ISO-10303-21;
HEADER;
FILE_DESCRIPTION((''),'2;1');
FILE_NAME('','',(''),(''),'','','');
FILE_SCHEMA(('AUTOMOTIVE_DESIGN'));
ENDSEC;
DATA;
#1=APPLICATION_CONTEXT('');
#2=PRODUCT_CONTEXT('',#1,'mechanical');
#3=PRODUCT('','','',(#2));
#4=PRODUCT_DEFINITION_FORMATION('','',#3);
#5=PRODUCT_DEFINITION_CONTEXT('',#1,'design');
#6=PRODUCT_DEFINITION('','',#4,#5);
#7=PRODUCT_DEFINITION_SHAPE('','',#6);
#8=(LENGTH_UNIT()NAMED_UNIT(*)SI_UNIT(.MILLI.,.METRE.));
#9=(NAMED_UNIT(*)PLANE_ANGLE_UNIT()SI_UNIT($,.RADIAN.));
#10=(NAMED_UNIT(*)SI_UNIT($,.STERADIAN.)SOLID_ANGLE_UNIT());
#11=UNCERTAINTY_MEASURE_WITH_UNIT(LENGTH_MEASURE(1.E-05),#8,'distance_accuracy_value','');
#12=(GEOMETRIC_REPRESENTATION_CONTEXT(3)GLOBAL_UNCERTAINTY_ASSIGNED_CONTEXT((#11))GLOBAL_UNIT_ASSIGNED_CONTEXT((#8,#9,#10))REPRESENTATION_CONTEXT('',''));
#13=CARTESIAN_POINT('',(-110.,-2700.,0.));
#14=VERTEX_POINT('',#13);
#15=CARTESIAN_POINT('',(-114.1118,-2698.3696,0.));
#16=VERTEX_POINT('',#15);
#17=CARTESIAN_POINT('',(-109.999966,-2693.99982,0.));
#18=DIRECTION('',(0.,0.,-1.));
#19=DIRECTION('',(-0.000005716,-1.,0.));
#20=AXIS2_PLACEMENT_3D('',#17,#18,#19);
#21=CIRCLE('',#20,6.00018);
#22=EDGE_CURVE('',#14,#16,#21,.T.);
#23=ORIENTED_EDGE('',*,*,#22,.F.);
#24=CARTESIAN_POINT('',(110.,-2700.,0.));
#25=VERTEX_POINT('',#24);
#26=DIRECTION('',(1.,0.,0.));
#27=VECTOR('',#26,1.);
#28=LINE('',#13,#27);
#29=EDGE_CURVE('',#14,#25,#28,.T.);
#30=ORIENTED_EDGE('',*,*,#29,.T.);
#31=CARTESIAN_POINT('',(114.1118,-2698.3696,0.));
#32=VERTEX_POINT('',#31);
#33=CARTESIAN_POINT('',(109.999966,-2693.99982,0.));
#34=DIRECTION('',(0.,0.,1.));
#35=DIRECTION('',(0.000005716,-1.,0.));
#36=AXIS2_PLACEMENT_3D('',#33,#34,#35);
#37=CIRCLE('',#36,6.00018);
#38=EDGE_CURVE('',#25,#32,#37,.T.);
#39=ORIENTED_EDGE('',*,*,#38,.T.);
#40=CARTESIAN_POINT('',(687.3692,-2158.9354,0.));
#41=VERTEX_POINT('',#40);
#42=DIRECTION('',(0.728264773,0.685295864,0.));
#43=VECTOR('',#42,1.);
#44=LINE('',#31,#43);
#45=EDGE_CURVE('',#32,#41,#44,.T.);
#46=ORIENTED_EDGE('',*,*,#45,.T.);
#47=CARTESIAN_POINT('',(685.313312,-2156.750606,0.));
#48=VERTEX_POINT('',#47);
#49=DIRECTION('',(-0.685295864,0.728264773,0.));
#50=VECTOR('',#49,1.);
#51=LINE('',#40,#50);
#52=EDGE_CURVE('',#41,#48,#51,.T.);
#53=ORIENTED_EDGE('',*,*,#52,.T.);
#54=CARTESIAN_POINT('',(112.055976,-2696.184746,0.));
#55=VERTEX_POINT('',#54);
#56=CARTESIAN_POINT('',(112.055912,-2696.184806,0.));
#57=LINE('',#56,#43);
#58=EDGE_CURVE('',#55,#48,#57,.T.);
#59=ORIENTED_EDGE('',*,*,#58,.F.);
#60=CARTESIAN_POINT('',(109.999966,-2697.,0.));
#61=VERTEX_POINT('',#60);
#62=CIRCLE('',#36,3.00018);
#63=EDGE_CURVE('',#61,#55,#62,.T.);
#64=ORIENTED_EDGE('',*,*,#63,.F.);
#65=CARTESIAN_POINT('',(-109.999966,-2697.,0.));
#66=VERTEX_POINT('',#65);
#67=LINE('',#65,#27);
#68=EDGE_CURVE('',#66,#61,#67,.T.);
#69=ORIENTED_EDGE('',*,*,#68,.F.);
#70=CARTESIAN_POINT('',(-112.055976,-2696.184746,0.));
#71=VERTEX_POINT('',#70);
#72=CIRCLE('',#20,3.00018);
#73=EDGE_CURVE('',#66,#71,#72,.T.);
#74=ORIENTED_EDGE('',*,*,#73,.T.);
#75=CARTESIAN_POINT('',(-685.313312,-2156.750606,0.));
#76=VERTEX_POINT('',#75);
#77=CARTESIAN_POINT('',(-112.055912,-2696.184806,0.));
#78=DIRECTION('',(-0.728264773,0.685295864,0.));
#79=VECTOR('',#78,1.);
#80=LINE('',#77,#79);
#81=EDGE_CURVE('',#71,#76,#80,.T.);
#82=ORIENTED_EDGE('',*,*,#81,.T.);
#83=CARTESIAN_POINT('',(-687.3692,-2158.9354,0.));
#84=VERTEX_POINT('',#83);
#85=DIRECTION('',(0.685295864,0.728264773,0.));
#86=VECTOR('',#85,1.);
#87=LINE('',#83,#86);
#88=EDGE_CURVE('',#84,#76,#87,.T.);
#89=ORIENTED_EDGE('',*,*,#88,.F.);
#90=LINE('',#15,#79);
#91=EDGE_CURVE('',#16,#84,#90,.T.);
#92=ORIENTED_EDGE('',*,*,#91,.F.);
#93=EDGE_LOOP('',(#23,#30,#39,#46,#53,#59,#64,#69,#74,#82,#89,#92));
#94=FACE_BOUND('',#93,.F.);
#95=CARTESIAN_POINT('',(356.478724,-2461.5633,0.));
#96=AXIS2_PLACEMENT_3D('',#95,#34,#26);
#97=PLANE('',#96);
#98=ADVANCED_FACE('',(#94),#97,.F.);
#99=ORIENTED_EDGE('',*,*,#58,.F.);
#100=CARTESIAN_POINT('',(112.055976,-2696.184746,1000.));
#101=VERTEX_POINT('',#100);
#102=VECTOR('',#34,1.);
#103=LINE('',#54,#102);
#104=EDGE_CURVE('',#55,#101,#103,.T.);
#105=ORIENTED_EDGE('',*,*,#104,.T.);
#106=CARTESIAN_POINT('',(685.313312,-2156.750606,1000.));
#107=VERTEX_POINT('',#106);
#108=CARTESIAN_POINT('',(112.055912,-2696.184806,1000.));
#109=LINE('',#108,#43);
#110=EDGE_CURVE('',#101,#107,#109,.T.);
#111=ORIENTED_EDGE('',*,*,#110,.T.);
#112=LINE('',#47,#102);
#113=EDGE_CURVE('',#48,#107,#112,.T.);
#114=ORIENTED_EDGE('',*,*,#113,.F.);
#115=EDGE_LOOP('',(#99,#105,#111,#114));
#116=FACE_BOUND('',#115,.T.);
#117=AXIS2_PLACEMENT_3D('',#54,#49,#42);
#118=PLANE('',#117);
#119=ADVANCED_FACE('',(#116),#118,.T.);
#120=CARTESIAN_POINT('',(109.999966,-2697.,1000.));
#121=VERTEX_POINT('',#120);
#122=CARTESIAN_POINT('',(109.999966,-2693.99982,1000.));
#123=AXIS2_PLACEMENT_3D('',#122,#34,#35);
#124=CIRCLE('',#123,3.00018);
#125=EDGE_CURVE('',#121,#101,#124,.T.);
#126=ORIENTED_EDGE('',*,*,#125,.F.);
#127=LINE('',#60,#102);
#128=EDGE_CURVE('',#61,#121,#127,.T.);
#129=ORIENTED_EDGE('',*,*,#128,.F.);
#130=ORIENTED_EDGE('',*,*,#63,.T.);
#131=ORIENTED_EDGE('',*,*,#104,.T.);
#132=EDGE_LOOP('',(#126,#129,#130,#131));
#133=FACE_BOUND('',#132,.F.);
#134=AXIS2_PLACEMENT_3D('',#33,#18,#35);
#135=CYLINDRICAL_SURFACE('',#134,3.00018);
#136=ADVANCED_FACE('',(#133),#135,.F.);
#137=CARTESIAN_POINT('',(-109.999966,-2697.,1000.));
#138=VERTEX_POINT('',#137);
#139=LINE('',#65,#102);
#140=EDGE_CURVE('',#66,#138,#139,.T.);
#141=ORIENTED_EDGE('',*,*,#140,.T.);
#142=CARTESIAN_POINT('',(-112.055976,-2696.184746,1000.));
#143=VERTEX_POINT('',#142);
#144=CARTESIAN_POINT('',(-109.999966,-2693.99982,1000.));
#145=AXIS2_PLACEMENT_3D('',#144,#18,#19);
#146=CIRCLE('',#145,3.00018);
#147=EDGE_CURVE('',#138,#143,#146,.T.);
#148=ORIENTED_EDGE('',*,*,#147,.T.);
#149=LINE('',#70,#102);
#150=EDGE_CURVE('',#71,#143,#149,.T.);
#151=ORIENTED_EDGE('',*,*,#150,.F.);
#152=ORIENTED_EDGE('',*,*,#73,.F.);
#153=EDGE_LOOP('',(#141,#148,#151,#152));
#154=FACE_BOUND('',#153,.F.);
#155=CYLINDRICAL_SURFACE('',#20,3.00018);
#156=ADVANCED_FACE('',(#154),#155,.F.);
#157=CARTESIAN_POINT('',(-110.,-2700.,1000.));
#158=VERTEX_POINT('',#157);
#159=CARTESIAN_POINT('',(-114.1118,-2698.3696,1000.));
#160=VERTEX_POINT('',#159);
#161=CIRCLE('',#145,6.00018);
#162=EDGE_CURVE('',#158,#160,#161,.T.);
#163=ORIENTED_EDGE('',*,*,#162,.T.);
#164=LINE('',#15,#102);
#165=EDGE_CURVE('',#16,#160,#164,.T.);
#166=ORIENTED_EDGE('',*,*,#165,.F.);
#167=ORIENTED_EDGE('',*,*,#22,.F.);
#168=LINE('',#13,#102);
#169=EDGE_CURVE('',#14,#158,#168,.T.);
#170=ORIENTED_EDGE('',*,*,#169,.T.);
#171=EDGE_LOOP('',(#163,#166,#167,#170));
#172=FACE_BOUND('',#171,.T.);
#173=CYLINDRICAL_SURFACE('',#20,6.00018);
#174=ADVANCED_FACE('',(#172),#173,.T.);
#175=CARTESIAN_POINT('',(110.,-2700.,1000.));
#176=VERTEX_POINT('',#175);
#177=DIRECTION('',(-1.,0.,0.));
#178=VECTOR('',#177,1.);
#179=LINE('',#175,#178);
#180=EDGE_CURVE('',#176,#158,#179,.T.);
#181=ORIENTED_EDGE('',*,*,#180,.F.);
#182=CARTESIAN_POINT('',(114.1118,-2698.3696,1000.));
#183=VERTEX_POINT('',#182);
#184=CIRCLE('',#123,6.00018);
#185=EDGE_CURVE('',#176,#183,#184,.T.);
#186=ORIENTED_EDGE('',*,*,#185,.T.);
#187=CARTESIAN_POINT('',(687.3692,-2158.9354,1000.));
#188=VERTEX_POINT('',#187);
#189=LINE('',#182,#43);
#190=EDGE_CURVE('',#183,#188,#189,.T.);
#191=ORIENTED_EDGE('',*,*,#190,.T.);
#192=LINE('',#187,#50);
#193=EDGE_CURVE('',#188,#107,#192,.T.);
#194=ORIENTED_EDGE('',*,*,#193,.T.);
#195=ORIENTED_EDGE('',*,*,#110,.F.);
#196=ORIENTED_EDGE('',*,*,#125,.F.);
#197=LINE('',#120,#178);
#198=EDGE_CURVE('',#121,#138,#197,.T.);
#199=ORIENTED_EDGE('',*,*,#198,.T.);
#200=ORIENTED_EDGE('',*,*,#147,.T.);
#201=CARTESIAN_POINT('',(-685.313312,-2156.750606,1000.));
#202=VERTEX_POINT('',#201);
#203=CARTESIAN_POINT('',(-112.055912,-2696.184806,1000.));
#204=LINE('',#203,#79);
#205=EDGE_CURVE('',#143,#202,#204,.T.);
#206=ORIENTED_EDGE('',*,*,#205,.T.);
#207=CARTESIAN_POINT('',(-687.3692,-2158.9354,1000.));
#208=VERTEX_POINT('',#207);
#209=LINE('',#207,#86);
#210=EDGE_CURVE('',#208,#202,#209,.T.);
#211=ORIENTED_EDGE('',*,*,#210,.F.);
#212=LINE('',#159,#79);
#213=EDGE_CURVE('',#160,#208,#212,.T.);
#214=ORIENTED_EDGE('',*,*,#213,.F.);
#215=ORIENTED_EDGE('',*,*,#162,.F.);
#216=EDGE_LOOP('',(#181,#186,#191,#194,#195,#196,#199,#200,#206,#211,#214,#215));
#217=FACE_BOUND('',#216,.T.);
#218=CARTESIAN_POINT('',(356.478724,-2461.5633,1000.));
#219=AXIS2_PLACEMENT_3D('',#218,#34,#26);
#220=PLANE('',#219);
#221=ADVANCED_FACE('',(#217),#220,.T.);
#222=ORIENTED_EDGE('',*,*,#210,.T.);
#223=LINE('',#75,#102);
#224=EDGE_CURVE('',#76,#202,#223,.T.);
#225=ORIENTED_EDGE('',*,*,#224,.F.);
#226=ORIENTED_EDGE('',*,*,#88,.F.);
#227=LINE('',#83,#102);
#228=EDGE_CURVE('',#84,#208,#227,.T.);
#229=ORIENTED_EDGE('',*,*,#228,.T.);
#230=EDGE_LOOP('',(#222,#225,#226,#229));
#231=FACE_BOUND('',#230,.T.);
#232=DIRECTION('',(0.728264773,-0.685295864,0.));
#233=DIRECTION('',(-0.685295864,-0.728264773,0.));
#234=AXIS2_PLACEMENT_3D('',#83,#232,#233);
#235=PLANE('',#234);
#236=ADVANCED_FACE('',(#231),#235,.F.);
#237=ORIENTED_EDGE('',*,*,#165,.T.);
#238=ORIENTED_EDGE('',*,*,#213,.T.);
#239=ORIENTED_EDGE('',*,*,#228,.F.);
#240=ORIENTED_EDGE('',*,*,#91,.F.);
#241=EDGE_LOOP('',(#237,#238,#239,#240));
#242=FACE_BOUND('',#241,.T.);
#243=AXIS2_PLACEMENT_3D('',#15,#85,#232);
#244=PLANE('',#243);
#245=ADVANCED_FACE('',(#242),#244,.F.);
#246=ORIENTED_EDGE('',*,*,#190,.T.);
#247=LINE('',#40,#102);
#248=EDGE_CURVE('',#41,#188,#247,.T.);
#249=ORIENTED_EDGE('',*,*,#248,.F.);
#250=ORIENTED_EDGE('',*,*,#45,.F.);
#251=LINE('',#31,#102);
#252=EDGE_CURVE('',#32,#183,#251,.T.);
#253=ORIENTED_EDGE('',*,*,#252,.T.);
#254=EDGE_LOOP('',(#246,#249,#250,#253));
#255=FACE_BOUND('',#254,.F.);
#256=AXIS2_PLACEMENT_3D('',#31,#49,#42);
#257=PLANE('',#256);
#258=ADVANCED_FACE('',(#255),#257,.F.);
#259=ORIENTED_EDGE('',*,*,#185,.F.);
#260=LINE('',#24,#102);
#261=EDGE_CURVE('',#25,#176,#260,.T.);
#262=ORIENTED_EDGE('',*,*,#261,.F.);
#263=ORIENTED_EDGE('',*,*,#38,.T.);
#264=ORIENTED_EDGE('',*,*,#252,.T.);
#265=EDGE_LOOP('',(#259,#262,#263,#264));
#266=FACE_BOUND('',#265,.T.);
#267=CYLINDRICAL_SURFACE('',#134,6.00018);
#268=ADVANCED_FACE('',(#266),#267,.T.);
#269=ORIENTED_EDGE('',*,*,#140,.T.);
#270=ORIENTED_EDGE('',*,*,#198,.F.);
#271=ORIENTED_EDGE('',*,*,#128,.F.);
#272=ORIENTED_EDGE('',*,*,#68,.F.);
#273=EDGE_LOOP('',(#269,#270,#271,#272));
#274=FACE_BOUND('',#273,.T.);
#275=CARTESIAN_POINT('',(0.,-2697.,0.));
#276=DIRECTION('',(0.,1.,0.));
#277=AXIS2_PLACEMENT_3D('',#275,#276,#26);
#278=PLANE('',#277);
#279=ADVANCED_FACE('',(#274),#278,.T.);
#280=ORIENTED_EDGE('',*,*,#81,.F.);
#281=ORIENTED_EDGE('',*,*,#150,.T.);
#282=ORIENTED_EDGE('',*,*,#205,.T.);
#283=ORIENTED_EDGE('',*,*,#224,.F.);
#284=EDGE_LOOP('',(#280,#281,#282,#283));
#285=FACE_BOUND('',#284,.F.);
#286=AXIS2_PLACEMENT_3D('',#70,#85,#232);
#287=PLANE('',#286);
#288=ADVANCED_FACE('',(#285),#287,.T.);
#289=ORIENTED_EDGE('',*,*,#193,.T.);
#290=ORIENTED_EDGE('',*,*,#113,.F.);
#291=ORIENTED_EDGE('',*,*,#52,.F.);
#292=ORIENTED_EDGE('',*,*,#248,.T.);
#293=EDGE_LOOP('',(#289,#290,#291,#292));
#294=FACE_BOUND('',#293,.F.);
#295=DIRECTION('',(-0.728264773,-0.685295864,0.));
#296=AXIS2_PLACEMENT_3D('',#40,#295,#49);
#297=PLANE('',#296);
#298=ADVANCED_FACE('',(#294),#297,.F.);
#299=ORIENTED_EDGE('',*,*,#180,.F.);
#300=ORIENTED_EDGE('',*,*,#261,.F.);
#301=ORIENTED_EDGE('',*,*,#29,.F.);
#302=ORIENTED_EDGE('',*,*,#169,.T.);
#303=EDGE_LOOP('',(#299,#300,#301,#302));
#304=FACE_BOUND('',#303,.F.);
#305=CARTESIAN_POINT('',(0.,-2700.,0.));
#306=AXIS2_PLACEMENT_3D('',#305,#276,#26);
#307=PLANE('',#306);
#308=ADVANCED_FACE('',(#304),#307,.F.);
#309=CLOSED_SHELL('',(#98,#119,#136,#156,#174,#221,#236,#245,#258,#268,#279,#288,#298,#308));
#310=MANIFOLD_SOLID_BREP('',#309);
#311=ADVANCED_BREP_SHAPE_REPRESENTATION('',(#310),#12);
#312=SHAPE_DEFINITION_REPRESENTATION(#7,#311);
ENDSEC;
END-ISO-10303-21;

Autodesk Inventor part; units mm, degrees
ref_plane "YZ Plane" through (0, 0, 0) normal (1, 0, 0) x (0, 1, 0)
ref_plane "XZ Plane" through (0, 0, 0) normal (0, 1, 0) x (-1, 0, 0)
ref_plane "XY Plane" through (0, 0, 0) normal (0, 0, 1) x (1, 0, 0)
sketch "Sketch1" plane through (0, 0, 0) normal (0, 0, 1) x (1, 0, 0)
  line L0 (-750, 0) -> (750, 0) construction
  line L1 (750, 0) -> (750, -2700) construction
  line L2 (750, -2700) -> (-750, -2700) construction
  line L3 (-750, -2700) -> (-750, 0) construction
  line L4 (800, 50) -> (-800, 50) construction
  line L5 (-800, 50) -> (-800, -2750) construction
  line L6 (-800, -2750) -> (800, -2750) construction
  line L7 (800, -2750) -> (800, 50) construction
  line L8 (-850, 100) -> (850, 100) construction
  line L9 (850, 100) -> (850, -2800) construction
  line L10 (850, -2800) -> (-850, -2800) construction
  line L11 (-850, -2800) -> (-850, 100) construction
  arc A0 (750, 0) -> (745.2706, 0.6314) centre (0, -5600) ccw construction
  line L12 (-750, -2100) -> (750, -2100) construction
  line L13 (114.1118, -2698.3696) -> (687.3692, -2158.9354)
  arc A1 (750, -2100) -> (768.2917, -213.4901) centre (-10250, -1050) ccw construction
  line L14 (750, 0) -> (749.6018, -2.9735) construction
  arc A2 (750, -3.0268) -> (0, 47) centre (-0.2, -5603) ccw construction
  line L15 (750, 0) -> (747.0136, -0.2851) construction
  arc A3 (767.1641, -238.6409) -> (747.4657, -5.0326) centre (-10252.9895, -1050.2527) ccw construction
  arc A4 (750.4522, -4.7486) -> (745.2706, 0.6314) centre (744.4791, -5.3162) ccw construction
  arc A5 (747.4657, -5.0326) -> (744.8748, -2.3426) centre (744.4792, -5.3164) ccw construction
  line L16 (750, -2100) -> (752.9864, -2100.2851) construction
  arc A6 (752.9864, -2100.2851) -> (771.2831, -213.263) centre (-10246.9891, -1050.0292) ccw construction
  line L17 (750, -2100) -> (752.0559, -2102.1848) construction
  line L18 (752.0559, -2102.1848) -> (752.0559, -2102.1848) construction
  arc A7 (749.1768, -2100.7746) -> (750.1074, -2098.8746) centre (747.1209, -2098.5898) ccw construction
  line L19 (0, -2697) -> (110, -2697) construction
  line L20 (112.0559, -2696.1848) -> (685.3133, -2156.7506) construction
  arc A8 (110, -2700) -> (114.1118, -2698.3696) centre (110, -2694) ccw
  arc A9 (110, -2697) -> (112.0559, -2696.1848) centre (110, -2694) ccw construction
  line L21 (685.3133, -2156.7506) -> (687.3692, -2158.9354) construction
  line L22 (752.0559, -2102.1848) -> (671.2185, -2178.2526) construction
  line L23 (671.2185, -2178.2526) -> (669.1626, -2176.0678) construction
  arc A10 (747.4657, -5.0326) -> (747.0136, -0.2851) centre (-10252.9895, -1050.2527) ccw construction
  arc A11 (745.2706, 0.6314) -> (0, 50) centre (0, -5600) ccw construction
  arc A12 (750.4522, -4.7486) -> (750, 0) centre (-10250, -1050) ccw construction
  line L24 (770.156, -238.4205) -> (767.1641, -238.6409) construction
  line L25 (768.2917, -213.4901) -> (771.2831, -213.263) construction
  arc A13 (768.2917, -213.4901) -> (750.4522, -4.7486) centre (-10250, -1050) ccw construction
  line L26 (0, 100) -> (0, 50) construction
  line L27 (0, -2700) -> (0, -2697) construction
  line L28 (0, 47) -> (0, 0) construction
  line L29 (0, 50) -> (0, 47) construction
  arc A14 (752.0559, -2102.1848) -> (752.9864, -2100.2851) centre (749.9983, -2099.9992) ccw construction
  line L30 (0, -2700) -> (110, -2700)
  line L31 (687.3692, -2158.9354) -> (750, -2100) construction
  point P0 (0, -2750)
  dimension "d19" = 1500
  dimension "d20" = 2700
  dimension "d21" = 2100
  dimension "d22" = 6
  dimension "d23" = 3
  dimension "d24" = 3
  dimension "d25" = 6
  dimension "d26" = 3
  dimension "d27" = 239.271
  dimension "d28" = 50
  dimension "d29" = 50
  dimension "d30" = 3
  dimension "d31" = 25
  dimension "d32" = 110
  dimension "d33" = 25
  dimension "d34" = 111
contour flange "Contour Flange1" sketch "Sketch1" thickness 3 bend radius 3 width 1000 along (0, 0, 1) mid plane no both sides no wall seen from (55, -2700, 0) lies toward (0, 1, 0) curves L30 A8 L13
bend "Bend1"
corner "Corner1"
mirror "Mirror1" about plane through (0, 0, 0) normal (1, 0, 0)
equation "\"d19\" = Бак_ширина_общая"
equation "\"d20\" = Бак_высота_общая"
equation "\"d21\" = Бак_высота_до_конуса"
equation "\"d22\" = Thickness + BendRadius"
equation "\"d23\" = Thickness"
equation "\"d24\" = Thickness"
equation "\"d25\" = Thickness + BendRadius"
equation "\"d26\" = Thickness"
equation "\"d27\" = Бак_спина_длина_фланцев"
equation "\"d30\" = d40"
equation "\"d31\" = Бак_нахлест_фланца"
equation "\"d32\" = 0.5 * Бак_брюхо_ширина_полки"
equation "\"d33\" = Бак_нахлест_фланца"
equation "\"d34\" = Бак_борт_длина_фланца"
equation "\"d7\" = Thickness"
equation "\"d8\" = BendReliefWidth"
equation "\"d9\" = BendReliefDepth"
equation "\"d10\" = MinimumRemnant"
equation "\"d11\" = TransitionRadius"
equation "\"d13\" = BendRadius"
equation "\"d15\" = CornerReliefSize"
equation "\"d16\" = GapSize"
equation "\"d17\" = JacobiRadiusSize"
equation "\"BendRadius\" = Thickness"
equation "\"BendReliefWidth\" = Thickness"
equation "\"BendReliefDepth\" = 0.5 * Thickness"
equation "\"CornerReliefSize\" = 4 * Thickness"
equation "\"MinimumRemnant\" = 2 * Thickness"
equation "\"TransitionRadius\" = BendRadius"
equation "\"JacobiRadiusSize\" = BendRadius"
equation "\"GapSize\" = Thickness"
equation "\"d38\" = d40 + d44"
equation "\"d39\" = d40"
equation "\"d44\" = d40"
equation "\"Бак_ширина_общая\" = 1500"
equation "\"Бак_высота_общая\" = 2700"
equation "\"Бак_высота_до_конуса\" = 2100"
equation "\"Thickness\" = 3"
equation "\"Бак_спина_длина_фланцев\" = 239.271"
equation "\"d40\" = 3"
equation "\"Бак_нахлест_фланца\" = 25"
equation "\"Бак_брюхо_ширина_полки\" = 220"
equation "\"Бак_борт_длина_фланца\" = 111"
properties part number "MSC 041 sheet belly main" material "Stainless Steel"
